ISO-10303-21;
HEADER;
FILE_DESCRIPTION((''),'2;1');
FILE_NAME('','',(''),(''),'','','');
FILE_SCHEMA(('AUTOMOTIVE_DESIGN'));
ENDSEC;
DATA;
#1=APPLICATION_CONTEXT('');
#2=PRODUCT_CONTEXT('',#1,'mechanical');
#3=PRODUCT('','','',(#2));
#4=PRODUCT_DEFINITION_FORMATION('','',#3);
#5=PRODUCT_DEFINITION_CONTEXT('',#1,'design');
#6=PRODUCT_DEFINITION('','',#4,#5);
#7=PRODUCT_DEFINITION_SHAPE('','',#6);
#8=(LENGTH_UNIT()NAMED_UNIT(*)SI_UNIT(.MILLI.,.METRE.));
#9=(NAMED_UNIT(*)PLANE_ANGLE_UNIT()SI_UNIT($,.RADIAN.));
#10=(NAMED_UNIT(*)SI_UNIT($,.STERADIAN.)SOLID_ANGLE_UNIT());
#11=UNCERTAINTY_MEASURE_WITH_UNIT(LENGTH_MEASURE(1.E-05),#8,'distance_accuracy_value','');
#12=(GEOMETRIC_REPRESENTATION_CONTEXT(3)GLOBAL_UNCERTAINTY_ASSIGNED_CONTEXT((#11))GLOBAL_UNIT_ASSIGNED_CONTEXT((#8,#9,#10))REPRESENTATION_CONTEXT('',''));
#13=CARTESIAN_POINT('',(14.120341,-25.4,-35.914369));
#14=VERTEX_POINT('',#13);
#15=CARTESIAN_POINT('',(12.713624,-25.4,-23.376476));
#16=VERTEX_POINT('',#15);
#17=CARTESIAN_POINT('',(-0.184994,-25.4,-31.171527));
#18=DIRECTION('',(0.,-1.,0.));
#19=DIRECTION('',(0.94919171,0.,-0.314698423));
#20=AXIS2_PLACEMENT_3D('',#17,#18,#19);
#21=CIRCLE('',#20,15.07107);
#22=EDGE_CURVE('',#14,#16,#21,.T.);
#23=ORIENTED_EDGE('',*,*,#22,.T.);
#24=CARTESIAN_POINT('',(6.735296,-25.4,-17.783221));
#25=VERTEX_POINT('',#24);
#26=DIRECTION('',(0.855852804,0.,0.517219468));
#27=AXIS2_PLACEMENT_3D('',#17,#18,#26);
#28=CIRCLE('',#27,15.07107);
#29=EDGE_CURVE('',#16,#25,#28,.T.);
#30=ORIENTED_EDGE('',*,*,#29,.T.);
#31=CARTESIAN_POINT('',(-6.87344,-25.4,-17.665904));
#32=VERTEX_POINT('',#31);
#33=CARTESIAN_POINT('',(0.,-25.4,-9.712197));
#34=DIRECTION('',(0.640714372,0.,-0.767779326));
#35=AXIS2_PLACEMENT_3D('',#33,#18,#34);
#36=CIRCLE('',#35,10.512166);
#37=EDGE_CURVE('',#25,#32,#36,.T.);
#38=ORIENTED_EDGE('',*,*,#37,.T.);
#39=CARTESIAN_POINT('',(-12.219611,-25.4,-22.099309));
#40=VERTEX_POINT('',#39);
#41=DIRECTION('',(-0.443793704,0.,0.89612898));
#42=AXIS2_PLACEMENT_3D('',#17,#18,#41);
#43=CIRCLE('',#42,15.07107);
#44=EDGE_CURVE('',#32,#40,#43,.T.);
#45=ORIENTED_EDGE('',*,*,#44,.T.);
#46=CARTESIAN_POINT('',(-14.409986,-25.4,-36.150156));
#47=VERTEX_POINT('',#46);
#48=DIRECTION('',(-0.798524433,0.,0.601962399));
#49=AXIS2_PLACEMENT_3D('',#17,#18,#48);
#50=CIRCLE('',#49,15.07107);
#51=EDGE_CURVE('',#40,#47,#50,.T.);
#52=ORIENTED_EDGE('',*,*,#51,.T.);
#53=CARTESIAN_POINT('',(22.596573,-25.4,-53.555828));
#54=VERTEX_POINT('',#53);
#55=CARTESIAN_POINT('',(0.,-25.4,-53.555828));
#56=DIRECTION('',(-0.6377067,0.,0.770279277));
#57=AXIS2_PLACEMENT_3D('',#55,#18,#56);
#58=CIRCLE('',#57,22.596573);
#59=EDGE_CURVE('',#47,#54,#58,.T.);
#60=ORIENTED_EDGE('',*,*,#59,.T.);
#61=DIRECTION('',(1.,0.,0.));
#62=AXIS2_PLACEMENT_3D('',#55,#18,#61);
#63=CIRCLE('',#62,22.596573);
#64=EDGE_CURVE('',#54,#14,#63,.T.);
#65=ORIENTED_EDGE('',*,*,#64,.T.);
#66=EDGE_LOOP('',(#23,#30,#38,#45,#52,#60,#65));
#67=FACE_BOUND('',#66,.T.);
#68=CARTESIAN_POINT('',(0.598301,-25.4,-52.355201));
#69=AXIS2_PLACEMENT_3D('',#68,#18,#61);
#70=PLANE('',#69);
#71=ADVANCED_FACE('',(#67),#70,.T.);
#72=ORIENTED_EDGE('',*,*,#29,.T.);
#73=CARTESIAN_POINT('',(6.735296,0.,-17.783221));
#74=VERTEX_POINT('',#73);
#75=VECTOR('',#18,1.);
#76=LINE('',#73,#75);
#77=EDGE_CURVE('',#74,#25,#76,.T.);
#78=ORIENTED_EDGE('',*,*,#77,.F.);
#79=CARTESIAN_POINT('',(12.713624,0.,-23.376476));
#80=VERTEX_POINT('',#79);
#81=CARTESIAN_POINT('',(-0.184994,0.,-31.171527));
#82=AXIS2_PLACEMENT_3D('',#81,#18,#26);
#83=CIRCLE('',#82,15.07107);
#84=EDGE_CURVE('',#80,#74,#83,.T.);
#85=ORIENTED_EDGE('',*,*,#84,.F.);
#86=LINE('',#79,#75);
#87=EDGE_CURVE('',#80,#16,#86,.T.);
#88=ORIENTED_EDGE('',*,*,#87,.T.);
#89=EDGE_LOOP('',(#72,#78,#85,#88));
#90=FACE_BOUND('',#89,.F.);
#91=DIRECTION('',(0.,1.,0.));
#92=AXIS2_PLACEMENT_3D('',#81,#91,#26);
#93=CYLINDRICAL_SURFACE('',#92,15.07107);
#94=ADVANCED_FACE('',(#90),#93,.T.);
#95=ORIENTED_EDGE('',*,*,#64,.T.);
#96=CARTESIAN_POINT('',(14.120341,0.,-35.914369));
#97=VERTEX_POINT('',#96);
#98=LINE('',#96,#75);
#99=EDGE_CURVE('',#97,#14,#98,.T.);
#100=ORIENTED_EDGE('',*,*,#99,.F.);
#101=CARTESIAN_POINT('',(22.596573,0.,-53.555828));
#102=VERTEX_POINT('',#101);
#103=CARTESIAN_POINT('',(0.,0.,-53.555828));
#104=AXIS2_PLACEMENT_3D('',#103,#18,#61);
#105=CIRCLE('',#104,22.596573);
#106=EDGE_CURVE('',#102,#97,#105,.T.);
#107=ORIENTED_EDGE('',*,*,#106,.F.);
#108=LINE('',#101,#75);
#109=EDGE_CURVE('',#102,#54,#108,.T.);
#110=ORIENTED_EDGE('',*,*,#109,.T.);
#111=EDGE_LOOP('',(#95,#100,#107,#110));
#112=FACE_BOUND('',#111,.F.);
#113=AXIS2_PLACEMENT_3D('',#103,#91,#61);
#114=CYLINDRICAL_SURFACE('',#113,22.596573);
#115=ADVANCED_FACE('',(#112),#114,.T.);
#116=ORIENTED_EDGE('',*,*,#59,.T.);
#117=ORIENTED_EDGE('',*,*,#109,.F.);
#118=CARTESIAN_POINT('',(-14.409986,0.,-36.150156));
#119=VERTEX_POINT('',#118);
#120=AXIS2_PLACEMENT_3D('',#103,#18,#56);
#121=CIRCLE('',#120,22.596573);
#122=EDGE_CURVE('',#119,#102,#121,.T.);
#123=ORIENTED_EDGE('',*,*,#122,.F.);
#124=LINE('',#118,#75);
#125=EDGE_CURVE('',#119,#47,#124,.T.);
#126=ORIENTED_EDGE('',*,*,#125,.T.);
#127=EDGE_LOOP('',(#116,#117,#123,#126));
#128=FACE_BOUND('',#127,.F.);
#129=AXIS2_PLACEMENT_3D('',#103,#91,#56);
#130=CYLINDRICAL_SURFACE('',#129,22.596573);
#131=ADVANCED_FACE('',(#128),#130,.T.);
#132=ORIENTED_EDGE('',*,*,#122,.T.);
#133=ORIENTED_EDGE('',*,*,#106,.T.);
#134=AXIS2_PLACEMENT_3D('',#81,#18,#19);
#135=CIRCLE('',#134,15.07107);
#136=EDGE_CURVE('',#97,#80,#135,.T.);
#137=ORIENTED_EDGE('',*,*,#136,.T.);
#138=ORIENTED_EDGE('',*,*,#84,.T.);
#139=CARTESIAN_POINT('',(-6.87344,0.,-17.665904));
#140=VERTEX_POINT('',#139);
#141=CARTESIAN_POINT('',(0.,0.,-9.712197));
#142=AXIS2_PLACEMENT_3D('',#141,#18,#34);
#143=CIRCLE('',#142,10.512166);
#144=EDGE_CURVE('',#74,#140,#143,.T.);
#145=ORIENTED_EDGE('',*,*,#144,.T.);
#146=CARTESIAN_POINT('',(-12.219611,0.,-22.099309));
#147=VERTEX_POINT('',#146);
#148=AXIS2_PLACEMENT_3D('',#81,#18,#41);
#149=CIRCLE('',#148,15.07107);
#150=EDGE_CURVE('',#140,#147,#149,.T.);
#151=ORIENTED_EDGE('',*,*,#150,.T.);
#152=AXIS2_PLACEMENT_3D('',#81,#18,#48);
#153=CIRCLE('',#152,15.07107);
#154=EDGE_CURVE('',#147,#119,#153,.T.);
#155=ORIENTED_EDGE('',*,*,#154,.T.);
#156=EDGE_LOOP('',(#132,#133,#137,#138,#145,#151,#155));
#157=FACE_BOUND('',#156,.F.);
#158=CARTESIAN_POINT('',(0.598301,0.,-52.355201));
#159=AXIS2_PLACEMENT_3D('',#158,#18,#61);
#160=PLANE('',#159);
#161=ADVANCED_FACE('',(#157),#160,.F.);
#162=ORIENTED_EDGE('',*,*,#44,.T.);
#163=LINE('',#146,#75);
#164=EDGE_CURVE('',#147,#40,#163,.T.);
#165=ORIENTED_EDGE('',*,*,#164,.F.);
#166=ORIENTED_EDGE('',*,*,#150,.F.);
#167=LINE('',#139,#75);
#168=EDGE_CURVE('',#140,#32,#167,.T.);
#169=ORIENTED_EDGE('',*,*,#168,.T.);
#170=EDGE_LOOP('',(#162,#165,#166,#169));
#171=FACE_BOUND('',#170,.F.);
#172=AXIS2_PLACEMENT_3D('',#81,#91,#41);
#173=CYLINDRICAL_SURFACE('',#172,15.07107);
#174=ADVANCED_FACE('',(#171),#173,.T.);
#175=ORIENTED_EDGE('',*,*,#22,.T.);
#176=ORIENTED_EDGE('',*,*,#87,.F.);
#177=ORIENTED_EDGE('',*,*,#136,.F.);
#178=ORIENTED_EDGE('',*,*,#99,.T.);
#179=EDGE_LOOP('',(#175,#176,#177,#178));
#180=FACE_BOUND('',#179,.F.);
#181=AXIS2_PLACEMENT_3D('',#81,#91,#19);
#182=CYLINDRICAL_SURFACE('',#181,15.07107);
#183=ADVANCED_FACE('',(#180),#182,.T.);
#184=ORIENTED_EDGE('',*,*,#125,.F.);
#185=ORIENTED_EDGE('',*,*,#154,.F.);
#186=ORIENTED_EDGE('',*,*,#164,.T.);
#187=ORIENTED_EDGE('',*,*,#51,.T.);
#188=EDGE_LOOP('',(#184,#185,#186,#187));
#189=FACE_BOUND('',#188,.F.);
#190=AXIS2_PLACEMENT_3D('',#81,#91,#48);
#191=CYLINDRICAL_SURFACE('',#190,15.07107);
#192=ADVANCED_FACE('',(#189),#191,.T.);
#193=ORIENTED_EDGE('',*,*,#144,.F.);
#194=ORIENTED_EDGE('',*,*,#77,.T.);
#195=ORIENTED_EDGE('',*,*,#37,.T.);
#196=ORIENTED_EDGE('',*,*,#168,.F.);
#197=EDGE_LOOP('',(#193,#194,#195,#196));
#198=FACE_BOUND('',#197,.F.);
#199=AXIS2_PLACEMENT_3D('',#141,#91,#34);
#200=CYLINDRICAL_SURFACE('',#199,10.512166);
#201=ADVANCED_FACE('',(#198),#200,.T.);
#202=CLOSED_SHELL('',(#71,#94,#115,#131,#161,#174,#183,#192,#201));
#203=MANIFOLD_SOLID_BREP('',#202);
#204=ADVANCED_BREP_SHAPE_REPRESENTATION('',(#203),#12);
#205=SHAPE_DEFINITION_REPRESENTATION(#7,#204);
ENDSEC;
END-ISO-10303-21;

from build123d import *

# Parameters (mm, degrees)
F1_DEPTH = 25.4


with BuildPart() as f1:
    # F0 (on Front) → F1 (new body)
    with BuildSketch(Plane.XZ):
        with BuildLine():
            ThreePointArc((-14.4099858393, -36.15015585), (-9.6174010791, -74.0035828929), (22.5965727608, -53.5558275878))
            ThreePointArc((22.5965727608, -53.5558275878), (20.3675773267, -43.7697714683), (14.1203409545, -35.9143686951))
            ThreePointArc((14.1203409545, -35.9143686951), (-0.1867416275, -30.9600264713), (-14.4099858393, -36.15015585))
        make_face()
        with BuildLine():
            ThreePointArc((-14.4099858393, -36.15015585), (-0.1867416275, -30.9600264713), (14.1203409545, -35.9143686951))
            ThreePointArc((14.1203409545, -35.9143686951), (14.7921035223, -29.4911375194), (12.7136237721, -23.3764759904))
            ThreePointArc((12.7136237721, -23.3764759904), (10.1115297439, -20.1661301682), (6.7352958132, -17.7832205863))
            ThreePointArc((6.7352958132, -17.7832205863), (-0.0550758769, -16.1010168), (-6.8734396529, -17.6659042354))
            ThreePointArc((-6.8734396529, -17.6659042354), (-9.8053911529, -19.5704448334), (-12.2196112726, -22.0993093418))
            ThreePointArc((-12.2196112726, -22.0993093418), (-15.0762108242, -28.8501475286), (-14.4099858393, -36.15015585))
        make_face()
        with BuildLine():
            ThreePointArc((-6.8734396529, -17.6659042354), (-0.0550758769, -16.1010168), (6.7352958132, -17.7832205863))
            ThreePointArc((6.7352958132, -17.7832205863), (0.0906184951, 0.7995784888), (-6.8734396529, -17.6659042354))
        make_face()
    extrude(amount=F1_DEPTH)


solid = f1.part
